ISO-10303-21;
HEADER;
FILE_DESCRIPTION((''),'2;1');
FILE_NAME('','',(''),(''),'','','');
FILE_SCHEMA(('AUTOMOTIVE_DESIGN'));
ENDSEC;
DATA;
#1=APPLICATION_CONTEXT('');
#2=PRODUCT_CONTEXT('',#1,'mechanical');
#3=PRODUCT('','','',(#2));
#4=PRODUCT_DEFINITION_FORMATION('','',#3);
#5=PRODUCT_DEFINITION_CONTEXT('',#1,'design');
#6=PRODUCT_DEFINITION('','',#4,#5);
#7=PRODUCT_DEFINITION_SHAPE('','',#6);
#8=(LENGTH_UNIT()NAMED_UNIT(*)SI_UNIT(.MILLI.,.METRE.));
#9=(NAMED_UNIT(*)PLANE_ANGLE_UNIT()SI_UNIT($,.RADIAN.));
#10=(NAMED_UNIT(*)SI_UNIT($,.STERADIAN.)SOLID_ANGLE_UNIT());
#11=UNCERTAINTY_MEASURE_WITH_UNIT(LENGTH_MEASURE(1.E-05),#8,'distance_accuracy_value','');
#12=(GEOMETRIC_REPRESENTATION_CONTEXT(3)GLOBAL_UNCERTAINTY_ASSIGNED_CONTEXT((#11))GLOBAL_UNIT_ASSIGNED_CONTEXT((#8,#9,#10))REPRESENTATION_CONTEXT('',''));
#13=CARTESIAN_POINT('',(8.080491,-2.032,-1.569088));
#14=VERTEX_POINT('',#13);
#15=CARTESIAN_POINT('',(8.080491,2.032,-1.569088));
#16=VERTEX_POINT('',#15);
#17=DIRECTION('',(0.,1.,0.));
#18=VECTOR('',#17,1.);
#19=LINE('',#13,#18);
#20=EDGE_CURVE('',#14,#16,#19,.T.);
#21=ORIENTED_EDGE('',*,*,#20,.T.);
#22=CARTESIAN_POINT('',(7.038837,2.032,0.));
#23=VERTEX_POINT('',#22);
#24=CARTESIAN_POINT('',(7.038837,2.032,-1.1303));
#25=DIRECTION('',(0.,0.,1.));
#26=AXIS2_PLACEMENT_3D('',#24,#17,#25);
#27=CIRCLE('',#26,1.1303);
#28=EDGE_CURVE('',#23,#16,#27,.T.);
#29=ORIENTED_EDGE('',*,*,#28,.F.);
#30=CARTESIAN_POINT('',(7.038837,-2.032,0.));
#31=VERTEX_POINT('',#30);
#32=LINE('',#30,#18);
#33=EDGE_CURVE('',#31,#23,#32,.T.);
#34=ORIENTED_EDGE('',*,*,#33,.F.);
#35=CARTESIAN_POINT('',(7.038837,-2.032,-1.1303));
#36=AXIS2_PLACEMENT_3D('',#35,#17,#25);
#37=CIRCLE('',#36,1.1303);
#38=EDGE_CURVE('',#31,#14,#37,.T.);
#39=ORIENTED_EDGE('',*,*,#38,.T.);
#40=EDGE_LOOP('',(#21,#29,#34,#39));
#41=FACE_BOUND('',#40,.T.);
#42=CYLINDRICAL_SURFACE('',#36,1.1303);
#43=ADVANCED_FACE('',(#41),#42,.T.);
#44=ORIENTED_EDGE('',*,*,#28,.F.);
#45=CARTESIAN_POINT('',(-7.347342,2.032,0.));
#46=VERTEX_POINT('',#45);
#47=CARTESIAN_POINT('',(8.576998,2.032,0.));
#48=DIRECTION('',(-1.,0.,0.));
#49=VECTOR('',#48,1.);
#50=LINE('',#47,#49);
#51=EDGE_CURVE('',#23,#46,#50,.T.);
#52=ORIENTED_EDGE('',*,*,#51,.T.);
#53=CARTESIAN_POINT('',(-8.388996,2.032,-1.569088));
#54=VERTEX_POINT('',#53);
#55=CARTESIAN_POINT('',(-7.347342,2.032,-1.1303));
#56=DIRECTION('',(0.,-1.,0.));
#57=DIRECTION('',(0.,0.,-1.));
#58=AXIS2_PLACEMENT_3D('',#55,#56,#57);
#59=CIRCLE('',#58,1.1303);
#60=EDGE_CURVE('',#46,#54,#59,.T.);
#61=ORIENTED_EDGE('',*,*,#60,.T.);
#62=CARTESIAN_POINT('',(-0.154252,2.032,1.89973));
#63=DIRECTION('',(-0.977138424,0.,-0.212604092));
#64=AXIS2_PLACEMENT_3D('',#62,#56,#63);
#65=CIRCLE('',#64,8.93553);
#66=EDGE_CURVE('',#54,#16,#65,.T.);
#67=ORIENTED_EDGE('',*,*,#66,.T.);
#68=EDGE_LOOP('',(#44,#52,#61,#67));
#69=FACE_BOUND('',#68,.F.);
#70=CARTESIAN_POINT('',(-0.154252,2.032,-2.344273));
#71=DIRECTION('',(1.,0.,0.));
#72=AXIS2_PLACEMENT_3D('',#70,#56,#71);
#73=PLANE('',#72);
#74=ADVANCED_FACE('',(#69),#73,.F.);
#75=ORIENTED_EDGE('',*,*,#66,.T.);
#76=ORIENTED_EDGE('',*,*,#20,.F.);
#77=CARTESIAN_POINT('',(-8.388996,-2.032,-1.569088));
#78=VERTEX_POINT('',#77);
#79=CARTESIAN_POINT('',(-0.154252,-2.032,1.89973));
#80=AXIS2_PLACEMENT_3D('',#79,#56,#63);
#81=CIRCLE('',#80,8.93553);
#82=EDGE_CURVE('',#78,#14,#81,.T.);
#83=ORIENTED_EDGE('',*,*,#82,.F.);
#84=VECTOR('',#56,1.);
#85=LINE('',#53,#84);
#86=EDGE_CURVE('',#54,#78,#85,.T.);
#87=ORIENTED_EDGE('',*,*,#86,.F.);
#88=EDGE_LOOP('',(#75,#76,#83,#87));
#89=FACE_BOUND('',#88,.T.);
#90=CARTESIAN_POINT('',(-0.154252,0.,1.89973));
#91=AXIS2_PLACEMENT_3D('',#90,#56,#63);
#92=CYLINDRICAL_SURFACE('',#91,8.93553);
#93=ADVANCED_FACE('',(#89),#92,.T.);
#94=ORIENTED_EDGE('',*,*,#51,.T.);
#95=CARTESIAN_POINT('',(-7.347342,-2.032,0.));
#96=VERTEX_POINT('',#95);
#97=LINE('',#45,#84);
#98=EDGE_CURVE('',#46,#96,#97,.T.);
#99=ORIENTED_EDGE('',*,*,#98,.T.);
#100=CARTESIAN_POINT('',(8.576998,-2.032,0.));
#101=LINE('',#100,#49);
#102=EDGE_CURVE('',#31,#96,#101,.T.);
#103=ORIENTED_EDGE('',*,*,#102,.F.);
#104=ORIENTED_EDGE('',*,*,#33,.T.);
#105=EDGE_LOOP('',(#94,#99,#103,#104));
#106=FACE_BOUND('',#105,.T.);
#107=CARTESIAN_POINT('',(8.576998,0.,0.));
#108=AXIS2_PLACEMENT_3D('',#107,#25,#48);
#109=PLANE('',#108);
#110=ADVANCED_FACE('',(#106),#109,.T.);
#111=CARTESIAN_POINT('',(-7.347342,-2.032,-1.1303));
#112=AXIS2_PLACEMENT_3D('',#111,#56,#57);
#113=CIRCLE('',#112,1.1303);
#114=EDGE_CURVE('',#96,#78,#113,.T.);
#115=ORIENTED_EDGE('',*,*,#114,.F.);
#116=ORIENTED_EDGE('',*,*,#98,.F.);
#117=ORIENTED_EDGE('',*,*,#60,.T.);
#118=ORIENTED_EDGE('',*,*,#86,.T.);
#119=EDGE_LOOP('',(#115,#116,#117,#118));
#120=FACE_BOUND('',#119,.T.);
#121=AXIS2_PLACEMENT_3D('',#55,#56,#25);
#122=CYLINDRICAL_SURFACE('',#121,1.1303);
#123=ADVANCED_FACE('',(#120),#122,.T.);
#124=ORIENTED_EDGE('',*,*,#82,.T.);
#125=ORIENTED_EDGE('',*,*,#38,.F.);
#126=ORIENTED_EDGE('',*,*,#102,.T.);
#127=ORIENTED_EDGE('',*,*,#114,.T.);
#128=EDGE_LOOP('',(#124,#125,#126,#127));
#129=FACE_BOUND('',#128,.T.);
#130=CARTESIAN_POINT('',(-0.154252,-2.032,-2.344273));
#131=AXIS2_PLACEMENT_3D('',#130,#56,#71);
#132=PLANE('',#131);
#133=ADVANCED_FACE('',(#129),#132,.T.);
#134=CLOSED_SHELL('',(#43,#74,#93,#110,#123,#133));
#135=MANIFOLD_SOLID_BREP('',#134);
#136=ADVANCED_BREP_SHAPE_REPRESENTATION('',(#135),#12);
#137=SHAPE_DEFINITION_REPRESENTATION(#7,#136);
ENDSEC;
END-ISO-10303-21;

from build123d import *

# Parameters (mm, degrees)
F1_DEPTH = 2.032
F2_R     = 1.1303


with BuildPart() as f1:
    # F0 (on Front) → F1 (new body, symmetric)
    with BuildSketch(Plane.XZ):
        with BuildLine():
            Line((8.5769976952, 0), (-8.8855023048, 0))
            ThreePointArc((-8.8855023048, 0), (-0.1542523048, -7.0358), (8.5769976952, 0))
        make_face()
    extrude(amount=F1_DEPTH, both=True)

    # F2
    f2_edges = [f1.edges().sort_by_distance(p)[0] for p in [
        (-8.885502, 0, 0),
        (8.576998, 0, 0),
    ]]
    fillet(f2_edges, radius=F2_R)


solid = f1.part
